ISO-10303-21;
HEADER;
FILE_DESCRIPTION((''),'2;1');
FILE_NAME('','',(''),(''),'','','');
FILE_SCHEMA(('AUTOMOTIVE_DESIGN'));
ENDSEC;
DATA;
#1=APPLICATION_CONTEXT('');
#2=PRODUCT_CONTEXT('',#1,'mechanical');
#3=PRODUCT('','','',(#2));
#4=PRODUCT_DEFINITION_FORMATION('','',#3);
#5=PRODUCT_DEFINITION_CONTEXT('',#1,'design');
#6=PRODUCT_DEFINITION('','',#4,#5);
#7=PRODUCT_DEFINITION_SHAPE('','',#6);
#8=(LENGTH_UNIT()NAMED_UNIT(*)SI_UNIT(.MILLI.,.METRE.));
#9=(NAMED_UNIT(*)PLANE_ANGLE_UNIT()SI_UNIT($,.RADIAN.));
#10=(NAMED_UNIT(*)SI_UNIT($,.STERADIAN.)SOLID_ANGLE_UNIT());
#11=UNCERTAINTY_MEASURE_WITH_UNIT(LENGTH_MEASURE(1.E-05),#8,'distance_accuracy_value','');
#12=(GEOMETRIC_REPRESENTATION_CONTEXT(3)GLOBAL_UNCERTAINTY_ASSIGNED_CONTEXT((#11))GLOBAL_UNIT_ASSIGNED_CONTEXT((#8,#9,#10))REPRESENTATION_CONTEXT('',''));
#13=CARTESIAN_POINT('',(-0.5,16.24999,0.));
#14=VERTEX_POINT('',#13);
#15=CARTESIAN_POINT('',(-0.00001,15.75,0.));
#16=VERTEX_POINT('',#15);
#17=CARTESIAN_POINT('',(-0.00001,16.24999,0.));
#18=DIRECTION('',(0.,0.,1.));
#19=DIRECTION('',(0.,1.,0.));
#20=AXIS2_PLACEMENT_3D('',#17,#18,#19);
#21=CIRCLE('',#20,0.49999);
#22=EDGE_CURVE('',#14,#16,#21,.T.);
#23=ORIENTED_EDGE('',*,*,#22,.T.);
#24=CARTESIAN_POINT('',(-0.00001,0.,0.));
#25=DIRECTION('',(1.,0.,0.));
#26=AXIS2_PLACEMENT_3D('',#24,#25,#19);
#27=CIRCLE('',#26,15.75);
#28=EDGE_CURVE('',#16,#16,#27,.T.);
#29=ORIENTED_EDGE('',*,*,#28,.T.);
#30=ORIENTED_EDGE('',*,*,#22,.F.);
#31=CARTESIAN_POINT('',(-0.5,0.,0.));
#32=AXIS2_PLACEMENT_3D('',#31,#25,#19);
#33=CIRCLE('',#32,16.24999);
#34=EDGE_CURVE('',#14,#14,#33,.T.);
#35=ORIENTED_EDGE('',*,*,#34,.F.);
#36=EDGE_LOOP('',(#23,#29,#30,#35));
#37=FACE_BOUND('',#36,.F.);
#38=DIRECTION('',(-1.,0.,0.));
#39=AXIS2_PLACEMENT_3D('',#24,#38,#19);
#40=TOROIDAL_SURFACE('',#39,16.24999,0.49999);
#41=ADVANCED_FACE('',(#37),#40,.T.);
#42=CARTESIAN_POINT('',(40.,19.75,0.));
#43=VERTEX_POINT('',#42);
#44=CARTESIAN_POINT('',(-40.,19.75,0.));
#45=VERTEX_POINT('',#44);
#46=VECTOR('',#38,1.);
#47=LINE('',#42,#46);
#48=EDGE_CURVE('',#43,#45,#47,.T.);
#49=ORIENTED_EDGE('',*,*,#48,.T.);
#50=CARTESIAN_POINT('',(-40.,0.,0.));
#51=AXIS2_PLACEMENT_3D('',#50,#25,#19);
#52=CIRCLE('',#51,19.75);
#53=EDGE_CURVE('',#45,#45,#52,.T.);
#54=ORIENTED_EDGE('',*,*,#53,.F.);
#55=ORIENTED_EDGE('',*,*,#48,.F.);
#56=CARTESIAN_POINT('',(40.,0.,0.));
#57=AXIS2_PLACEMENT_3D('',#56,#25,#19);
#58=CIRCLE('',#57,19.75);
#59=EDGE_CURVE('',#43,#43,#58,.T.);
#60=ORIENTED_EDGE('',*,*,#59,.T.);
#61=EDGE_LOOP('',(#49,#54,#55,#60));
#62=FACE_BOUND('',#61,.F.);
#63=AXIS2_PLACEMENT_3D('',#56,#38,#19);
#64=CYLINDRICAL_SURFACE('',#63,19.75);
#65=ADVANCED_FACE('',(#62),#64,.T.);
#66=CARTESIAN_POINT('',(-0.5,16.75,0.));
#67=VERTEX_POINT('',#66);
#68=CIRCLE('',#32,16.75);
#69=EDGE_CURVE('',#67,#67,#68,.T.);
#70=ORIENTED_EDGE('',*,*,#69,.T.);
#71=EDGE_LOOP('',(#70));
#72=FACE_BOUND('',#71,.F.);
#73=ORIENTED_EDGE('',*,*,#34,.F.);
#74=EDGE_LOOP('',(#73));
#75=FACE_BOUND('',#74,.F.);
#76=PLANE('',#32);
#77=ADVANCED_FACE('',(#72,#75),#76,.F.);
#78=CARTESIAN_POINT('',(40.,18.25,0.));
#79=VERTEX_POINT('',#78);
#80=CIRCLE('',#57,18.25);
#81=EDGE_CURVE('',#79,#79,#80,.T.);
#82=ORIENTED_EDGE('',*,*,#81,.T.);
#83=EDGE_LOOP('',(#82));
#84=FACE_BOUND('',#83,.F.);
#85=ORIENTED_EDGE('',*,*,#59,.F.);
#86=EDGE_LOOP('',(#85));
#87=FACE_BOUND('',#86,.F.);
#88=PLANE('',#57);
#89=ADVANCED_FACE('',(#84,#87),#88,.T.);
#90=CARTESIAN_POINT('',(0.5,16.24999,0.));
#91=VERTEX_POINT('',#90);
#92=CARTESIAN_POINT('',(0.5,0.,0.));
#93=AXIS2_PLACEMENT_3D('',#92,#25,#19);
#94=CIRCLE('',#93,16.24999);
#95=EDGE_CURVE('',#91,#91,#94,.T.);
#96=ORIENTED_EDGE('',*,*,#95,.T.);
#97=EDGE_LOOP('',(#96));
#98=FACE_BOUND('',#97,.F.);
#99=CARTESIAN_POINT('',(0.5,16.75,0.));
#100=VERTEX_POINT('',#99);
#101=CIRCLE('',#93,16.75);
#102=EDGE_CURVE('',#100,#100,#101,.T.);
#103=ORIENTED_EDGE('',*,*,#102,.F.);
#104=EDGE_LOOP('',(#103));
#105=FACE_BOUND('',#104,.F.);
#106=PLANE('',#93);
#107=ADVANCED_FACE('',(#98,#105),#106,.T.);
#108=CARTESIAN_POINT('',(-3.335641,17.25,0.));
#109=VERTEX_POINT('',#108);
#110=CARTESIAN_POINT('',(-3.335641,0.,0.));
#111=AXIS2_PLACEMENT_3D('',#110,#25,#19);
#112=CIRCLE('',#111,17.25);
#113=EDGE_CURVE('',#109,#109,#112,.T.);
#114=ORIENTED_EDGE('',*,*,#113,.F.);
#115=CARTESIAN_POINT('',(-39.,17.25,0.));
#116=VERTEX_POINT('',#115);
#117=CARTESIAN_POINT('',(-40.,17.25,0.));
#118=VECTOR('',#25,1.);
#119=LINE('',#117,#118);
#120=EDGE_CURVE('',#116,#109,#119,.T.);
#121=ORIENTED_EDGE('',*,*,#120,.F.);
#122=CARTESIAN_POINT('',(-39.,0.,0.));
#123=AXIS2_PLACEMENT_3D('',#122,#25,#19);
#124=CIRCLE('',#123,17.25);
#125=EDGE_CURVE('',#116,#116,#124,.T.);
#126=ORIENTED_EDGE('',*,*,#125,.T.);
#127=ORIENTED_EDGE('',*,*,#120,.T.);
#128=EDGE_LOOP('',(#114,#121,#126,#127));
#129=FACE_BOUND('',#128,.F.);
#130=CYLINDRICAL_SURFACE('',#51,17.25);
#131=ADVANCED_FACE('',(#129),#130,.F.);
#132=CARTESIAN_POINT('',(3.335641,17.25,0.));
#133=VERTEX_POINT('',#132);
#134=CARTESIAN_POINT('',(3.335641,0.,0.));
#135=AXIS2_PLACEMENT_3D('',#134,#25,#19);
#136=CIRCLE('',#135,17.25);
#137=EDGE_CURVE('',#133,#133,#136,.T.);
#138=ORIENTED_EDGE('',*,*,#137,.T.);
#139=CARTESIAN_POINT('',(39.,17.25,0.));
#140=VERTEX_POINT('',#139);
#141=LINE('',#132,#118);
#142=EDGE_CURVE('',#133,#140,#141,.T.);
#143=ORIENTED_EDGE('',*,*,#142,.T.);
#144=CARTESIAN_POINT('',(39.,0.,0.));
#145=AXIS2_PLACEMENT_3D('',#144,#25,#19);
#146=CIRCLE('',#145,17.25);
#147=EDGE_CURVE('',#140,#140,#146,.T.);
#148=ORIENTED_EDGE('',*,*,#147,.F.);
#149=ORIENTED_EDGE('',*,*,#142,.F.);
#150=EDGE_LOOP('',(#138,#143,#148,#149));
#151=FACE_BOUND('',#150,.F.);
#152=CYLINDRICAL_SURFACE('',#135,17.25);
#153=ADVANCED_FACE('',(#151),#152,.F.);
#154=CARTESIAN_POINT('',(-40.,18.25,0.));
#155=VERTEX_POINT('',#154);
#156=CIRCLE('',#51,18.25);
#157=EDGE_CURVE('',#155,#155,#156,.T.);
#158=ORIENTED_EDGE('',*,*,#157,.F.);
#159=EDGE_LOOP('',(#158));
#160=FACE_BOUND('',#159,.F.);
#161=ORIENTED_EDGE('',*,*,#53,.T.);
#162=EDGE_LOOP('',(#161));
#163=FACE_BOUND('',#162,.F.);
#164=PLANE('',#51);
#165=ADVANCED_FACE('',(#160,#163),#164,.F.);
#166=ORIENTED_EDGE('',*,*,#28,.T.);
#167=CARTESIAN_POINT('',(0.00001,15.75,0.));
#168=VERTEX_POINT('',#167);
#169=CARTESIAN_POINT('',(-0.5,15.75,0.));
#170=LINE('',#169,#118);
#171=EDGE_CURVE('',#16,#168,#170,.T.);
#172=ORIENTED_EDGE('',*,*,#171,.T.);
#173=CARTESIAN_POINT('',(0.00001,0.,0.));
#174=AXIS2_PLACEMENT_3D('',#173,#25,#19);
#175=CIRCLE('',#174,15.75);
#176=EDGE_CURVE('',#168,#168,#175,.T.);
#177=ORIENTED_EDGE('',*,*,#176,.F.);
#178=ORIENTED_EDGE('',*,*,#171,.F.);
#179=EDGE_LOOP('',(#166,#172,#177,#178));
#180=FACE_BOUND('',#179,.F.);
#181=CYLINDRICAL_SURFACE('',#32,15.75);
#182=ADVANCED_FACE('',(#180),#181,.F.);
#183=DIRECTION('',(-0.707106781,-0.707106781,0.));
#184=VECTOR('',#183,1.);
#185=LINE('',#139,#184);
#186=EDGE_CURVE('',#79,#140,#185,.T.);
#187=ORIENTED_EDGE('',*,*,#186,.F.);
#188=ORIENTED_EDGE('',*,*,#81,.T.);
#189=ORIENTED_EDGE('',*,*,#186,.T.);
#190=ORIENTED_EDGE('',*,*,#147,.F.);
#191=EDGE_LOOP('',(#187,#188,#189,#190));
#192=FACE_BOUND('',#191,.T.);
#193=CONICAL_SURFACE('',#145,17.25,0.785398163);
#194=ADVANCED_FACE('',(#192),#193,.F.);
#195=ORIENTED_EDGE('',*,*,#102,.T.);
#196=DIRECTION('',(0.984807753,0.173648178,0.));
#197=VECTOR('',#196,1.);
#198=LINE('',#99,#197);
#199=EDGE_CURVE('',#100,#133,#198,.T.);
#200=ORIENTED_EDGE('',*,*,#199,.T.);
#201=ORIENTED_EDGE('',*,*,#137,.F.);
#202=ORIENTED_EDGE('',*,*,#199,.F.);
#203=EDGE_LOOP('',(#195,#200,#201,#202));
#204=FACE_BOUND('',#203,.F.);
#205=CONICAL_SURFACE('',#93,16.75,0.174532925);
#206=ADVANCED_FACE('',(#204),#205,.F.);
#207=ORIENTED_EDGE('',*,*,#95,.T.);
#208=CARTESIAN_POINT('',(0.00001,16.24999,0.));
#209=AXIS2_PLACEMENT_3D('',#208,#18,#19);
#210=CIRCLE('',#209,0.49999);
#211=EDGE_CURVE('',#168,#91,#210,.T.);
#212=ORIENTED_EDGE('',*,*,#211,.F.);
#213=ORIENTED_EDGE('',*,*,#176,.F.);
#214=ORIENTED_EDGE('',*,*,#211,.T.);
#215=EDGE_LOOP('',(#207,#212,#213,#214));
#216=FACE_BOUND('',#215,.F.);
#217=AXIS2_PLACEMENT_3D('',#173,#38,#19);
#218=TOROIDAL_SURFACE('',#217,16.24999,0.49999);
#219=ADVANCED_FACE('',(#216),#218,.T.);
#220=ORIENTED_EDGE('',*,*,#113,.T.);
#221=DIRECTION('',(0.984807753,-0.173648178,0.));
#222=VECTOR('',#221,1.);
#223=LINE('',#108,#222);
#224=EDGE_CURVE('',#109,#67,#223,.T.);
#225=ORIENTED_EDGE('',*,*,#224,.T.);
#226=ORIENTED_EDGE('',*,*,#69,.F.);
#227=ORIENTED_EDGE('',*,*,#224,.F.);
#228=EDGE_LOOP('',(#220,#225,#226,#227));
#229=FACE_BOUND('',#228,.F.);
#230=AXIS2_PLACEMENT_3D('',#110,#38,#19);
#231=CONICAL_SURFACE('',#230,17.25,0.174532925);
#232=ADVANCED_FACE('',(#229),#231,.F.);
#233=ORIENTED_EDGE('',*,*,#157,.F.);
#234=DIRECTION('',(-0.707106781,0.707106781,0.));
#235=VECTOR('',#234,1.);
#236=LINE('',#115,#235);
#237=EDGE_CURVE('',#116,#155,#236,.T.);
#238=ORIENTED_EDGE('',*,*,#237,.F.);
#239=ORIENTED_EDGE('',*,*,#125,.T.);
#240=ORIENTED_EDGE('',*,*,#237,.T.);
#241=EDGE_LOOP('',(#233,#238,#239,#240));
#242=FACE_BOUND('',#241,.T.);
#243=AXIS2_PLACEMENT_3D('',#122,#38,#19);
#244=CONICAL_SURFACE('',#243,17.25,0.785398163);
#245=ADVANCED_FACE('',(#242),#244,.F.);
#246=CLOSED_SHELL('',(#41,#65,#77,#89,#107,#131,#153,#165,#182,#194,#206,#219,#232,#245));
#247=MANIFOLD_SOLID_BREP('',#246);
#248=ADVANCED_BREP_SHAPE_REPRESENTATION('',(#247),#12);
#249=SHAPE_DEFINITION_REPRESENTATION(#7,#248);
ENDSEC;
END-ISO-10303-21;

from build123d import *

# Parameters (mm, degrees)
F2_R    = 0.49999
F3_SIZE = 1


# Not quite as in the source:
# - a fillet or chamfer is up to 0.001 mm smaller than in the source, because OpenCascade refuses the exact size


with BuildPart() as f1:
    # F0 (on Top) → F1 (revolve)
    with BuildSketch(Plane.XY):
        Polygon((0, 19.75), (-40, 19.75), (-40, 17.25), (-3.3356409098, 17.25), (-0.5, 16.75), (-0.5, 15.75), (0, 15.75), (0.5, 15.75), (0.5, 16.75), (3.3356409098, 17.25), (40, 17.25), (40, 19.75), align=None)
    revolve(axis=Axis((0, 0, 0), (1, 0, 0)))

    # F2 (radius 0.5 in the source; OpenCascade refuses exactly that, so slightly less here)
    f2_edges = [f1.edges().sort_by_distance(p)[0] for p in [
        (-0.5, -15.75, 0),
        (0.5, -15.75, 0),
    ]]
    fillet(f2_edges, radius=F2_R)

    # F3
    f3_edges = [f1.edges().sort_by_distance(p)[0] for p in [
        (-40, -17.25, 0),
        (40, -17.25, 0),
    ]]
    chamfer(f3_edges, length=F3_SIZE)


solid = f1.part
